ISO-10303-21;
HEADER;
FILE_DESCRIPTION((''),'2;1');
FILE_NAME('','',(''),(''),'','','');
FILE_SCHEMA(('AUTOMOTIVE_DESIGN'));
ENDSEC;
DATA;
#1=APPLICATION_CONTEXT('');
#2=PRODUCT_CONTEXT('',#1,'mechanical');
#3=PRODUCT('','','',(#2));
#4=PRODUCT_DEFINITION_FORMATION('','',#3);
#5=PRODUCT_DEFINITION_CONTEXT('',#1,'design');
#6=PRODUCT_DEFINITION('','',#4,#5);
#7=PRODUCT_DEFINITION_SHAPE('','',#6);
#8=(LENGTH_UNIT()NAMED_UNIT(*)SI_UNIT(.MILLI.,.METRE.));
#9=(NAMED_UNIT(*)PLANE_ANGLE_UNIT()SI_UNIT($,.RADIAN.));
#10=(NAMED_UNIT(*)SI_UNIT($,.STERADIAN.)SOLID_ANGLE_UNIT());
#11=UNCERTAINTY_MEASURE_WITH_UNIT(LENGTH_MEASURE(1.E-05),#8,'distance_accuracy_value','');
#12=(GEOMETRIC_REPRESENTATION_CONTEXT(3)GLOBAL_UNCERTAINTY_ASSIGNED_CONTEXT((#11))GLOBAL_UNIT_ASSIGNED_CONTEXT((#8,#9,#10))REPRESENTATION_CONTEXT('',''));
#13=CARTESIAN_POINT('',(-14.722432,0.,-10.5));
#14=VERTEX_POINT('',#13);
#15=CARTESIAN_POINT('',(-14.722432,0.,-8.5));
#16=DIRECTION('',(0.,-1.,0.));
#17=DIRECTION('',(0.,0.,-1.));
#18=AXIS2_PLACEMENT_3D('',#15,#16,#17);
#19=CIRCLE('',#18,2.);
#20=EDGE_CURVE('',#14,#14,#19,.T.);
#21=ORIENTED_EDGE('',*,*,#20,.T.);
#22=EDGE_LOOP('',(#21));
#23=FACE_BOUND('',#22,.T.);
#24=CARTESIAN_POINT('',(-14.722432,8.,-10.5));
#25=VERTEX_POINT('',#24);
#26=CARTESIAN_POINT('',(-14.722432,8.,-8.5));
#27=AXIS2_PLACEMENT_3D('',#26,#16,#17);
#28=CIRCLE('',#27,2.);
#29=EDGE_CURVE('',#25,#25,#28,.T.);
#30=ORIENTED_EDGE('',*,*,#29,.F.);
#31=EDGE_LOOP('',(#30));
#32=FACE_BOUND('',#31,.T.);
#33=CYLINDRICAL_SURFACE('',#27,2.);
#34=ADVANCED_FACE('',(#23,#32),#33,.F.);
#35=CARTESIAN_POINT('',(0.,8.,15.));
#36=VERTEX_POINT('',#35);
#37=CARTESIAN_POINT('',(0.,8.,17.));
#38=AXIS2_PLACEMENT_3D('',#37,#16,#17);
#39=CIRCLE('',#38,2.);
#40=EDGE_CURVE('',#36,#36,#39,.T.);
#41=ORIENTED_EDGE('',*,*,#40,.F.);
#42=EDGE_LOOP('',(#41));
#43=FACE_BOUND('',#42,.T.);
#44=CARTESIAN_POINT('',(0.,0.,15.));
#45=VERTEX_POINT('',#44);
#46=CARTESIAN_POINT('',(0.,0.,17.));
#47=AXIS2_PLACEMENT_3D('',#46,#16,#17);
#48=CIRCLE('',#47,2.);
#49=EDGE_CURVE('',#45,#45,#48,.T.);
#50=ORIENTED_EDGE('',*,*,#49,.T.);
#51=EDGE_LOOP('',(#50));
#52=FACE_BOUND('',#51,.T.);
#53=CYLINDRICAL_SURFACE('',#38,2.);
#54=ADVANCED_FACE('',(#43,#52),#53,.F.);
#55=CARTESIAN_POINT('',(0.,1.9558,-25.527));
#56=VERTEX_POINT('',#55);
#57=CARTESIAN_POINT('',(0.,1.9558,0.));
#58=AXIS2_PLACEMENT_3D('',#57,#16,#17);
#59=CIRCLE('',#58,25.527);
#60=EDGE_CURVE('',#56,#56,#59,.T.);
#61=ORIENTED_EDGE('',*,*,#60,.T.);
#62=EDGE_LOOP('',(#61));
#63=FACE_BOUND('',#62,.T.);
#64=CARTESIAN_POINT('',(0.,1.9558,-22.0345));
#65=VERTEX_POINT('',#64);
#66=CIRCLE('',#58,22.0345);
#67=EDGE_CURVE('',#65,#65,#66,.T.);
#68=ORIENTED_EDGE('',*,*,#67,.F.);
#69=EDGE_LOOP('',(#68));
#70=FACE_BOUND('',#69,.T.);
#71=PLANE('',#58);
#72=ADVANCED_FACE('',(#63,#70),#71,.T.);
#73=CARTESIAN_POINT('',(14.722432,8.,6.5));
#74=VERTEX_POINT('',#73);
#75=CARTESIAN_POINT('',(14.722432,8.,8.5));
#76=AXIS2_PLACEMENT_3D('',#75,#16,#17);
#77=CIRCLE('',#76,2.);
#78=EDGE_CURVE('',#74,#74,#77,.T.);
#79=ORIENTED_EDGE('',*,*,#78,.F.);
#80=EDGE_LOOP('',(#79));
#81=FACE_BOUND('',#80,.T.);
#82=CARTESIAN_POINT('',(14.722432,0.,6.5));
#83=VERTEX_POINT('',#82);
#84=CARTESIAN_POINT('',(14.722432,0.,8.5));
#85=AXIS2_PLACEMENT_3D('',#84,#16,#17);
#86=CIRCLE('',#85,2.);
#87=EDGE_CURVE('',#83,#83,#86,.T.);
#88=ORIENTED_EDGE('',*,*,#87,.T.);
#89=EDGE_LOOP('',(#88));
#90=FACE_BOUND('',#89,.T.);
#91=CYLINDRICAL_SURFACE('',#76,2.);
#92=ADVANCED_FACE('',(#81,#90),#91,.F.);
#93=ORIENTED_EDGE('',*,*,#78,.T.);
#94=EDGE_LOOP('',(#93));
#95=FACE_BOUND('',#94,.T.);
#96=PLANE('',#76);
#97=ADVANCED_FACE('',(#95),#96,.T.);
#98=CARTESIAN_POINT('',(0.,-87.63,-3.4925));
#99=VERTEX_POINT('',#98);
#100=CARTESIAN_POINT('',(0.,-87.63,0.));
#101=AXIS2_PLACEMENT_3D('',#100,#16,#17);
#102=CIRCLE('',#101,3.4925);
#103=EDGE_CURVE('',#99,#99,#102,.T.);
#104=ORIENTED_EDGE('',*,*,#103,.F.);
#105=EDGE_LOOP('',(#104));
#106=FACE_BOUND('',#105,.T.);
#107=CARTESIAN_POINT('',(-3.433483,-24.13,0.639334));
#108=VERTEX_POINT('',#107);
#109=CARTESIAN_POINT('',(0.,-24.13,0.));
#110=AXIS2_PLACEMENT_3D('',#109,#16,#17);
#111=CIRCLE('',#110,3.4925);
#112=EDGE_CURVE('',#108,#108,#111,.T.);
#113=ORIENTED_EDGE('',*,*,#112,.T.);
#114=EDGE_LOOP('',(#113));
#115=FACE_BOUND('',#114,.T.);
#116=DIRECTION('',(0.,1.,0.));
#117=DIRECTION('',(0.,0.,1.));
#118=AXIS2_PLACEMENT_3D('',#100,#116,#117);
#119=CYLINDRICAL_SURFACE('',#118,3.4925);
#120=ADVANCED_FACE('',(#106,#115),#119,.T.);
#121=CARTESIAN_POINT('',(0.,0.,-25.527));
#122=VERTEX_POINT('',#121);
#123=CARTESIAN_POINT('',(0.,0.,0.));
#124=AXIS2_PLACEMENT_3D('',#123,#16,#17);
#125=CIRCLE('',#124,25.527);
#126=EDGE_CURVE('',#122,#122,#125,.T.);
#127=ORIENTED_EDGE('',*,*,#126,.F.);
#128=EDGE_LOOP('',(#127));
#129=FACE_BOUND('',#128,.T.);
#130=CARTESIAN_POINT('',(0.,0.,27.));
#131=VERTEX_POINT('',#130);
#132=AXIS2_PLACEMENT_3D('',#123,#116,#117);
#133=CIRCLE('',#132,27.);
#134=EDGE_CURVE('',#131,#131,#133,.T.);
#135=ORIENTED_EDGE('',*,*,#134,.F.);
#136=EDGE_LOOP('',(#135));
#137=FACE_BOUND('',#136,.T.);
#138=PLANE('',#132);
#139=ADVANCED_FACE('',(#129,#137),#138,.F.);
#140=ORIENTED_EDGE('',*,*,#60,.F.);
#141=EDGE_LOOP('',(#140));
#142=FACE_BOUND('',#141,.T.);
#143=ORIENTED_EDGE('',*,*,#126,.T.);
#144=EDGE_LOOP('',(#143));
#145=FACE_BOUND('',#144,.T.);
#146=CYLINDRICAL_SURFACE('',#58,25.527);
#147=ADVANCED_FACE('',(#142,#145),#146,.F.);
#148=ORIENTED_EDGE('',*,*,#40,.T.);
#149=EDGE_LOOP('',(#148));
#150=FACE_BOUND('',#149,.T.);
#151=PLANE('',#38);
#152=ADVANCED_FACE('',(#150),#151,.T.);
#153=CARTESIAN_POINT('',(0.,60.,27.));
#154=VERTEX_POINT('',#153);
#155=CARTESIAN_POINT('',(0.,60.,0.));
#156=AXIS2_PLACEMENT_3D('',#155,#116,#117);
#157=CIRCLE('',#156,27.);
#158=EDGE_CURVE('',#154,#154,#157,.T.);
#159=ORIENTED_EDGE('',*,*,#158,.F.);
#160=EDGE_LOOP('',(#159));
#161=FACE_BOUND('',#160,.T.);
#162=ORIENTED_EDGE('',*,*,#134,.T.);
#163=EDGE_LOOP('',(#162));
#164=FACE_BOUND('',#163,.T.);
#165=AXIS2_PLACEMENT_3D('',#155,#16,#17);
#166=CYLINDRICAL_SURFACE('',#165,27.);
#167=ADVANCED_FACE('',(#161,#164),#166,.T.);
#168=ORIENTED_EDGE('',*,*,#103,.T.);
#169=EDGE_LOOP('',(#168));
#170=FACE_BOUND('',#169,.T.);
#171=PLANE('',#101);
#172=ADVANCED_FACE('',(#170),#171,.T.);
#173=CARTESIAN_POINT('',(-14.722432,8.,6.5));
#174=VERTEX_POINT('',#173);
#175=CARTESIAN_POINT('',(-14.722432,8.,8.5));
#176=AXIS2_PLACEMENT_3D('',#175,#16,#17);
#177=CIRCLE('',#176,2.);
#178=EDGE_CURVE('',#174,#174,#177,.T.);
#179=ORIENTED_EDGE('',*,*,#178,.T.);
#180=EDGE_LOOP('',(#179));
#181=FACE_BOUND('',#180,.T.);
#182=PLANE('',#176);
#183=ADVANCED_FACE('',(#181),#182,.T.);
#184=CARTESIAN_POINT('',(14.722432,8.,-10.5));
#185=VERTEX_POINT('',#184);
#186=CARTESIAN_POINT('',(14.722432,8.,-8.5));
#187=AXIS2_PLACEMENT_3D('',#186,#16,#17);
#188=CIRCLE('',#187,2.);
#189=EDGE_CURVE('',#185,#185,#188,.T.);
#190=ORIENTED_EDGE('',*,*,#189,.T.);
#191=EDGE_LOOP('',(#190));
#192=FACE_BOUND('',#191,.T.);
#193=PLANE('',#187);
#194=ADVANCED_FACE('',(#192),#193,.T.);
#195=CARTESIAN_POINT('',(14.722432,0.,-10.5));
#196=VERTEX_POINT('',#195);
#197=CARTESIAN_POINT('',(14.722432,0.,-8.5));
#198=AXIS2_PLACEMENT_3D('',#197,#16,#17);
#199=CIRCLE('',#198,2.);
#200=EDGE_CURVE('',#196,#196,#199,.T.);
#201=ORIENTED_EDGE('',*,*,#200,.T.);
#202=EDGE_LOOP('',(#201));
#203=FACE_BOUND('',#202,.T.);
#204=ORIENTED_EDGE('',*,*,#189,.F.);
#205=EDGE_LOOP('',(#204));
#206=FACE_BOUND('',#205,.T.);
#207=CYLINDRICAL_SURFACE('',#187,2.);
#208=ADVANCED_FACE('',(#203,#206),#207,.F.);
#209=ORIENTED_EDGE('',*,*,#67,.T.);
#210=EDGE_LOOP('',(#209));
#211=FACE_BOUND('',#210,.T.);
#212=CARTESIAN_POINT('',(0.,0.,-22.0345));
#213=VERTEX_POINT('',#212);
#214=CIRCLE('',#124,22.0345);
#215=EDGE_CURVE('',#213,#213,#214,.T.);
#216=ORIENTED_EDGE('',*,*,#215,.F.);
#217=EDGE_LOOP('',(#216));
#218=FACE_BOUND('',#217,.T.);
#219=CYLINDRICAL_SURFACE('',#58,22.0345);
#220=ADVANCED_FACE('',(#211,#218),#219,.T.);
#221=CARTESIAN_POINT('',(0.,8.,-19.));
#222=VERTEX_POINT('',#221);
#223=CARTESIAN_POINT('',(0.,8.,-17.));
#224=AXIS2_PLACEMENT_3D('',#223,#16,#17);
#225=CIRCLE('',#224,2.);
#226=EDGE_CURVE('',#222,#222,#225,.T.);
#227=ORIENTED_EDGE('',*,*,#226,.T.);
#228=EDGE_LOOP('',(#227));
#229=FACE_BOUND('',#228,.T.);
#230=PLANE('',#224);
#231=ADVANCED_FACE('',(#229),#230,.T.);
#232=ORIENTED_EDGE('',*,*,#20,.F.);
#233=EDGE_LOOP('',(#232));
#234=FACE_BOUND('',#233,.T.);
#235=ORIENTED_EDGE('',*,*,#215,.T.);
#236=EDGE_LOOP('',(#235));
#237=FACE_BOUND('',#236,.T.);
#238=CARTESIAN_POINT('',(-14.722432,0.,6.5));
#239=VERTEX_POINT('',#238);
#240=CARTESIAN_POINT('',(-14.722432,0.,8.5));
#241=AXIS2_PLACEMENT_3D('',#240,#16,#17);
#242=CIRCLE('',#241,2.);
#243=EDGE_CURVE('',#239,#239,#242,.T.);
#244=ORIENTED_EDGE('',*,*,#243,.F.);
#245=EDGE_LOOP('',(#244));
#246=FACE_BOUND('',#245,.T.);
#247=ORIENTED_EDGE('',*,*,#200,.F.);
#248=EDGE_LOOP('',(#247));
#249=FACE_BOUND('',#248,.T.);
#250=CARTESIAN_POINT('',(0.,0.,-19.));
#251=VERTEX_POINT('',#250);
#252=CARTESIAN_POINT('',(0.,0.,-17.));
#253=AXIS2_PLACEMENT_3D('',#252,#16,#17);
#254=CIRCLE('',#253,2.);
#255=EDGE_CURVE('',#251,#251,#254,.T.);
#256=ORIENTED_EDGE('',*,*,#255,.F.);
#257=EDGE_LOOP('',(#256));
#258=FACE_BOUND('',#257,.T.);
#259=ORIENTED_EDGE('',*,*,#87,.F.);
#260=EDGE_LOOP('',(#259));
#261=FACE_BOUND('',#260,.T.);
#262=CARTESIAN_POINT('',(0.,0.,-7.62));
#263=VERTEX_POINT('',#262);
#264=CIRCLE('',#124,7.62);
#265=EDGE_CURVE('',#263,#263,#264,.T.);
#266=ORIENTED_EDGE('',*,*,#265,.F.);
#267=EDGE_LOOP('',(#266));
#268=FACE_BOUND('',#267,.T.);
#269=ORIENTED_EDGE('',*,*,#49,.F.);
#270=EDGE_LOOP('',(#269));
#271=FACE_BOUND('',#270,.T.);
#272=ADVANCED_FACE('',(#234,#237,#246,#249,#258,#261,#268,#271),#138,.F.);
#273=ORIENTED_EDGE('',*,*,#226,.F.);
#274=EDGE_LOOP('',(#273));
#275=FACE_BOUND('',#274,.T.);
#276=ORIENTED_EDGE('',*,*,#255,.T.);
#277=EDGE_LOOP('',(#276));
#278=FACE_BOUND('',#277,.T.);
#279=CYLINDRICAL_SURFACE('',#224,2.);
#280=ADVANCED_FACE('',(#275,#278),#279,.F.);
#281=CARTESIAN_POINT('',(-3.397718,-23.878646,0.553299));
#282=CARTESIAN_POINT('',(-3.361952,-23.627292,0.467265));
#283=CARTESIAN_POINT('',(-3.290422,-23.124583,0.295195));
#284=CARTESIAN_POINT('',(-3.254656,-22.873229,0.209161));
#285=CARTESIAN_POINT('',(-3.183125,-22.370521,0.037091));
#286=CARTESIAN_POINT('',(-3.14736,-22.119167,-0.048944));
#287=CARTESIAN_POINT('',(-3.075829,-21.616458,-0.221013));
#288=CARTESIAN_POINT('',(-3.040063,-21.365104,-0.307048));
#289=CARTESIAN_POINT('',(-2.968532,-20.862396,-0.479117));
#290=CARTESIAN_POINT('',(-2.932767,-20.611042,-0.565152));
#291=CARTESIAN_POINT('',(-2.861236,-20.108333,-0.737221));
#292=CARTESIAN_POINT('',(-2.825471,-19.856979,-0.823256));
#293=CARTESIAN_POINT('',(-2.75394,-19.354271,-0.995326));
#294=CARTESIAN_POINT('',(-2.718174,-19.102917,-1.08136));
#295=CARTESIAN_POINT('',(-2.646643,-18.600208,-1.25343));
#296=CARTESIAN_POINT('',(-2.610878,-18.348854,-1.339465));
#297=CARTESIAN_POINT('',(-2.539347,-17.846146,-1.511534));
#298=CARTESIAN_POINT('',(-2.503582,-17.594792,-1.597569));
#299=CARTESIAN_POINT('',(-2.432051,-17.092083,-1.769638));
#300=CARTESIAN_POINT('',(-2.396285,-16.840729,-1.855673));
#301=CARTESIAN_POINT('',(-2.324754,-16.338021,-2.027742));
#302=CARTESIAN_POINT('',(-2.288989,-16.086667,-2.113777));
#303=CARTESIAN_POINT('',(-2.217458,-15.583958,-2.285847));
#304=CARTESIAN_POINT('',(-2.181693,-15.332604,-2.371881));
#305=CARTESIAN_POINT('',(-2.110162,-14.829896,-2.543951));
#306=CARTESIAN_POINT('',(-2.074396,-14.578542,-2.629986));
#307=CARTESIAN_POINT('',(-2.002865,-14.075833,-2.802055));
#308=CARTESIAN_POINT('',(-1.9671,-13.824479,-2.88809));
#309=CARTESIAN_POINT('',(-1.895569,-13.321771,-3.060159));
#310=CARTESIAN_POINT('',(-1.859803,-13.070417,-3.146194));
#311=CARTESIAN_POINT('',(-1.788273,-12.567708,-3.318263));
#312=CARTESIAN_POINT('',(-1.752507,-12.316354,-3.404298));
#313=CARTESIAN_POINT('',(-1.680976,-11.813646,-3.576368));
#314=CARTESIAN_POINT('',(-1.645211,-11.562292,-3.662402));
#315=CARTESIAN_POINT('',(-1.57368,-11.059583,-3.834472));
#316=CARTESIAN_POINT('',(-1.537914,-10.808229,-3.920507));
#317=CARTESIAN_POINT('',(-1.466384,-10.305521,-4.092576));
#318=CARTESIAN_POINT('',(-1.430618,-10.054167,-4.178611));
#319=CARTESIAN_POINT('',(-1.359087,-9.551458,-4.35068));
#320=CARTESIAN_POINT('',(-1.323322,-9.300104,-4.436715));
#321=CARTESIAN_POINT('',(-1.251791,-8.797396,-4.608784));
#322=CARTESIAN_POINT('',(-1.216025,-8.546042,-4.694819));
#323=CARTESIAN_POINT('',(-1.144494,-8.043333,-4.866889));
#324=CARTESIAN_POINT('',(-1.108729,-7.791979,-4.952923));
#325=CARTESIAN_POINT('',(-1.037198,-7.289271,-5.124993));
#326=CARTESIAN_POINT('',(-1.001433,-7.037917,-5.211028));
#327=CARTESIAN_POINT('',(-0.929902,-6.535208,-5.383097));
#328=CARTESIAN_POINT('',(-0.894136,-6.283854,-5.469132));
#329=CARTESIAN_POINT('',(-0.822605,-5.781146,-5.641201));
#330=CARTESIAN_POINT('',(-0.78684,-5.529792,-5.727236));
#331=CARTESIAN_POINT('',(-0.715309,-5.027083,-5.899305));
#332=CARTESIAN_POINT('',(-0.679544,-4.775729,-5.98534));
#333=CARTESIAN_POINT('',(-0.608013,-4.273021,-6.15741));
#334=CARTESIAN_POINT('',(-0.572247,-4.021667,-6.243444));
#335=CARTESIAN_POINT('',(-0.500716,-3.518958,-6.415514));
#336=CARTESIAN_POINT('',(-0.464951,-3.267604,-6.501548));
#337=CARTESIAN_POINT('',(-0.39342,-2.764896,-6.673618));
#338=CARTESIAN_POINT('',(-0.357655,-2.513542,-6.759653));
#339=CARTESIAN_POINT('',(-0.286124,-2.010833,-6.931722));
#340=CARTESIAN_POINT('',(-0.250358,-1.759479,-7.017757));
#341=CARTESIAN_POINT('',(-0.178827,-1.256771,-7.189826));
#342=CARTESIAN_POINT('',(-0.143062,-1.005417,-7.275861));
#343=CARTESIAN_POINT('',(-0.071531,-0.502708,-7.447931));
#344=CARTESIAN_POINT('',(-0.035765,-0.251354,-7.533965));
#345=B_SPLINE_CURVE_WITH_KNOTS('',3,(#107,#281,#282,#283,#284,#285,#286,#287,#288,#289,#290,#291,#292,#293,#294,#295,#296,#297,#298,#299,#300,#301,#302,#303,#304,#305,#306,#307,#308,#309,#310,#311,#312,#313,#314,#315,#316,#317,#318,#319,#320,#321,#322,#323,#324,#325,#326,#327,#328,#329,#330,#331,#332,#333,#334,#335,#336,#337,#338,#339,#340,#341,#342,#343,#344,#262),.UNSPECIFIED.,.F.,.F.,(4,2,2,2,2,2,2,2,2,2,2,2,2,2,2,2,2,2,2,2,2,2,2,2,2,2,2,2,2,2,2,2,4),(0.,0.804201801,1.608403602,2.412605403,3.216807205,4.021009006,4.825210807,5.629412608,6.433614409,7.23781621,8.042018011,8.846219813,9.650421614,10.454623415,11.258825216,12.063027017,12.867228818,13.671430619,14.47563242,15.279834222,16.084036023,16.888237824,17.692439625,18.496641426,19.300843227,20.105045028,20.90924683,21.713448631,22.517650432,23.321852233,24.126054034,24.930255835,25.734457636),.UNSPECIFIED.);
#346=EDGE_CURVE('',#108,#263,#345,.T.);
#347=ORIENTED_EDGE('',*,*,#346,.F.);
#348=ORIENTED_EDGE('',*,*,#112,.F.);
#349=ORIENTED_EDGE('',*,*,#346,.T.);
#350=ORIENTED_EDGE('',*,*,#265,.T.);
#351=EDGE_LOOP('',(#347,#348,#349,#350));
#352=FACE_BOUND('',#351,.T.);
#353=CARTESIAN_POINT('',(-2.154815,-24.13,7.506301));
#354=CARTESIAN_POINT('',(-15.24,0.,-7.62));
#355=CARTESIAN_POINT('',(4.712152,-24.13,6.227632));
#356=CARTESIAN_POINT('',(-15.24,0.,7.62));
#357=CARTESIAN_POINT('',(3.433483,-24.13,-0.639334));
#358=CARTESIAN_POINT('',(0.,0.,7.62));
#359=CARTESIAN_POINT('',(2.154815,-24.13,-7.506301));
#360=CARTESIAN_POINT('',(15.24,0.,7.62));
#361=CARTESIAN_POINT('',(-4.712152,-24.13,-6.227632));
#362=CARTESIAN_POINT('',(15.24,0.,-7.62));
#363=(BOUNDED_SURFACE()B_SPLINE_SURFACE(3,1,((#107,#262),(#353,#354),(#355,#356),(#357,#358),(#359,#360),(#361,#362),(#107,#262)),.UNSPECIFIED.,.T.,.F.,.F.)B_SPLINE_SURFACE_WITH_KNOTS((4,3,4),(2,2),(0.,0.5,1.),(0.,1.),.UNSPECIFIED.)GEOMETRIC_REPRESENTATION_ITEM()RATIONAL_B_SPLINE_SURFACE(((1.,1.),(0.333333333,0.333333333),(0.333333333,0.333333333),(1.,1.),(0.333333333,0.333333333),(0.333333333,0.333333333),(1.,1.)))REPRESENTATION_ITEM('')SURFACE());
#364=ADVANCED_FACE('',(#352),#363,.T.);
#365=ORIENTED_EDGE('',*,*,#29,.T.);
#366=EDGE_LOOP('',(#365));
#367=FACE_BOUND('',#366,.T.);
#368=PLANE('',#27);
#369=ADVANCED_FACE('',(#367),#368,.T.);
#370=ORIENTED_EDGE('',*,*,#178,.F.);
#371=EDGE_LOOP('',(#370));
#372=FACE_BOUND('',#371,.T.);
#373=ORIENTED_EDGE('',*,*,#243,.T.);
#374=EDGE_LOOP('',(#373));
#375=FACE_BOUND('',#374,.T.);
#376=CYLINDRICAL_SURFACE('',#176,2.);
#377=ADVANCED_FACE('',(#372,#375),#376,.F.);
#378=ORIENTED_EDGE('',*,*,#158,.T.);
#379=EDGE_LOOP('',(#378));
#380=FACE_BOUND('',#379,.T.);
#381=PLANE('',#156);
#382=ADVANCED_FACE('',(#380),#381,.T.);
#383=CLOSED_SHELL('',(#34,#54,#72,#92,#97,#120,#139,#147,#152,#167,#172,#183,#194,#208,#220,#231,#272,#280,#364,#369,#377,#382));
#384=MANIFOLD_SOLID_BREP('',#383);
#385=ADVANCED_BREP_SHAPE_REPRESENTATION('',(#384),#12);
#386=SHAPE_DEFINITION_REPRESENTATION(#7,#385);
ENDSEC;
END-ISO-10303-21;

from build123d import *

# Parameters (mm, degrees)
SKETCH1_R           = 27
BOSS_EXTRUDE1_DEPTH = 60
SKETCH2_R           = 25.527
SKETCH2_R_2         = 22.0345
CUT_EXTRUDE1_DEPTH  = 1.9558
SKETCH3_R           = 2
CUT_EXTRUDE2_DEPTH  = 8
SKETCH8_R           = 3.4925
BOSS_EXTRUDE2_DEPTH = 63.5


with BuildPart() as part:
    # Sketch1 → Boss-Extrude1 (new body)
    with BuildSketch(Plane(origin=(0, 0, 0), x_dir=(1, 0, 0), z_dir=(0, 1, 0))):
        with Locations(Location((0, 0, 0), (0, 0, 270))):
            Circle(SKETCH1_R)
    extrude(amount=BOSS_EXTRUDE1_DEPTH)

    # Sketch2 → Cut-Extrude1 (cut)
    with BuildSketch(Plane.XZ):
        with Locations(Location((0, 0, 0), (0, 0, 270))):
            Circle(SKETCH2_R)
        with Locations(Location((0, 0, 0), (0, 0, 270))):
            Circle(SKETCH2_R_2, mode=Mode.SUBTRACT)
    extrude(amount=-CUT_EXTRUDE1_DEPTH, mode=Mode.SUBTRACT)

    # Sketch3 → Cut-Extrude2 (cut)
    with BuildSketch(Plane.XZ):
        with Locations(Location((0, 17, 0), (0, 0, 270))):
            Circle(SKETCH3_R)
        with Locations(Location((14.722431864, 8.5, 0), (0, 0, 270))):
            Circle(SKETCH3_R)
        with Locations(Location((14.722431864, -8.5, 0), (0, 0, 270))):
            Circle(SKETCH3_R)
        with Locations(Location((0, -17, 0), (0, 0, 270))):
            Circle(SKETCH3_R)
        with Locations(Location((-14.722431864, -8.5, 0), (0, 0, 270))):
            Circle(SKETCH3_R)
        with Locations(Location((-14.722431864, 8.5, 0), (0, 0, 270))):
            Circle(SKETCH3_R)
    extrude(amount=-CUT_EXTRUDE2_DEPTH, mode=Mode.SUBTRACT)

    # Loft1: read off the stored shape, not the designer's step
    # Loft1: loft between two sections, ruled curve by curve
    loft1_from = [
        Edge.make_bspline([(-3.433483362, -24.13, 0.639334225), (-2.154814912, -24.13, 7.50630095), (4.712151812, -24.13, 6.227632499), (3.433483362, -24.13, -0.639334225), (2.154814912, -24.13, -7.50630095), (-4.712151812, -24.13, -6.227632499), (-3.433483362, -24.13, 0.639334225)], [0, 0, 0, 0, 0.5, 0.5, 0.5, 1, 1, 1, 1], 3, [1, 0.333333333, 0.333333333, 1, 0.333333333, 0.333333333, 1]),
    ]
    loft1_to = [
        Edge.make_bspline([(0, 0, -7.62), (-15.24, 0, -7.62), (-15.24, 0, 7.62), (0, 0, 7.62), (15.24, 0, 7.62), (15.24, 0, -7.62), (0, 0, -7.62)], [0, 0, 0, 0, 0.5, 0.5, 0.5, 1, 1, 1, 1], 3, [1, 0.333333333, 0.333333333, 1, 0.333333333, 0.333333333, 1]),
    ]
    loft1 = Solid(Shell([*[Face.make_surface_from_curves(loft1_from[k], loft1_to[k]) for k in range(1)], Face(Wire(loft1_from)), Face(Wire(loft1_to))]))
    add(loft1)

    # Sketch8 → Boss-Extrude2 (add)
    with BuildSketch(Plane.XZ.offset(24.13)):
        with Locations(Location((0, 0, 0), (0, 0, 169.452))):
            Circle(SKETCH8_R)
    extrude(amount=BOSS_EXTRUDE2_DEPTH)


solid = part.part
